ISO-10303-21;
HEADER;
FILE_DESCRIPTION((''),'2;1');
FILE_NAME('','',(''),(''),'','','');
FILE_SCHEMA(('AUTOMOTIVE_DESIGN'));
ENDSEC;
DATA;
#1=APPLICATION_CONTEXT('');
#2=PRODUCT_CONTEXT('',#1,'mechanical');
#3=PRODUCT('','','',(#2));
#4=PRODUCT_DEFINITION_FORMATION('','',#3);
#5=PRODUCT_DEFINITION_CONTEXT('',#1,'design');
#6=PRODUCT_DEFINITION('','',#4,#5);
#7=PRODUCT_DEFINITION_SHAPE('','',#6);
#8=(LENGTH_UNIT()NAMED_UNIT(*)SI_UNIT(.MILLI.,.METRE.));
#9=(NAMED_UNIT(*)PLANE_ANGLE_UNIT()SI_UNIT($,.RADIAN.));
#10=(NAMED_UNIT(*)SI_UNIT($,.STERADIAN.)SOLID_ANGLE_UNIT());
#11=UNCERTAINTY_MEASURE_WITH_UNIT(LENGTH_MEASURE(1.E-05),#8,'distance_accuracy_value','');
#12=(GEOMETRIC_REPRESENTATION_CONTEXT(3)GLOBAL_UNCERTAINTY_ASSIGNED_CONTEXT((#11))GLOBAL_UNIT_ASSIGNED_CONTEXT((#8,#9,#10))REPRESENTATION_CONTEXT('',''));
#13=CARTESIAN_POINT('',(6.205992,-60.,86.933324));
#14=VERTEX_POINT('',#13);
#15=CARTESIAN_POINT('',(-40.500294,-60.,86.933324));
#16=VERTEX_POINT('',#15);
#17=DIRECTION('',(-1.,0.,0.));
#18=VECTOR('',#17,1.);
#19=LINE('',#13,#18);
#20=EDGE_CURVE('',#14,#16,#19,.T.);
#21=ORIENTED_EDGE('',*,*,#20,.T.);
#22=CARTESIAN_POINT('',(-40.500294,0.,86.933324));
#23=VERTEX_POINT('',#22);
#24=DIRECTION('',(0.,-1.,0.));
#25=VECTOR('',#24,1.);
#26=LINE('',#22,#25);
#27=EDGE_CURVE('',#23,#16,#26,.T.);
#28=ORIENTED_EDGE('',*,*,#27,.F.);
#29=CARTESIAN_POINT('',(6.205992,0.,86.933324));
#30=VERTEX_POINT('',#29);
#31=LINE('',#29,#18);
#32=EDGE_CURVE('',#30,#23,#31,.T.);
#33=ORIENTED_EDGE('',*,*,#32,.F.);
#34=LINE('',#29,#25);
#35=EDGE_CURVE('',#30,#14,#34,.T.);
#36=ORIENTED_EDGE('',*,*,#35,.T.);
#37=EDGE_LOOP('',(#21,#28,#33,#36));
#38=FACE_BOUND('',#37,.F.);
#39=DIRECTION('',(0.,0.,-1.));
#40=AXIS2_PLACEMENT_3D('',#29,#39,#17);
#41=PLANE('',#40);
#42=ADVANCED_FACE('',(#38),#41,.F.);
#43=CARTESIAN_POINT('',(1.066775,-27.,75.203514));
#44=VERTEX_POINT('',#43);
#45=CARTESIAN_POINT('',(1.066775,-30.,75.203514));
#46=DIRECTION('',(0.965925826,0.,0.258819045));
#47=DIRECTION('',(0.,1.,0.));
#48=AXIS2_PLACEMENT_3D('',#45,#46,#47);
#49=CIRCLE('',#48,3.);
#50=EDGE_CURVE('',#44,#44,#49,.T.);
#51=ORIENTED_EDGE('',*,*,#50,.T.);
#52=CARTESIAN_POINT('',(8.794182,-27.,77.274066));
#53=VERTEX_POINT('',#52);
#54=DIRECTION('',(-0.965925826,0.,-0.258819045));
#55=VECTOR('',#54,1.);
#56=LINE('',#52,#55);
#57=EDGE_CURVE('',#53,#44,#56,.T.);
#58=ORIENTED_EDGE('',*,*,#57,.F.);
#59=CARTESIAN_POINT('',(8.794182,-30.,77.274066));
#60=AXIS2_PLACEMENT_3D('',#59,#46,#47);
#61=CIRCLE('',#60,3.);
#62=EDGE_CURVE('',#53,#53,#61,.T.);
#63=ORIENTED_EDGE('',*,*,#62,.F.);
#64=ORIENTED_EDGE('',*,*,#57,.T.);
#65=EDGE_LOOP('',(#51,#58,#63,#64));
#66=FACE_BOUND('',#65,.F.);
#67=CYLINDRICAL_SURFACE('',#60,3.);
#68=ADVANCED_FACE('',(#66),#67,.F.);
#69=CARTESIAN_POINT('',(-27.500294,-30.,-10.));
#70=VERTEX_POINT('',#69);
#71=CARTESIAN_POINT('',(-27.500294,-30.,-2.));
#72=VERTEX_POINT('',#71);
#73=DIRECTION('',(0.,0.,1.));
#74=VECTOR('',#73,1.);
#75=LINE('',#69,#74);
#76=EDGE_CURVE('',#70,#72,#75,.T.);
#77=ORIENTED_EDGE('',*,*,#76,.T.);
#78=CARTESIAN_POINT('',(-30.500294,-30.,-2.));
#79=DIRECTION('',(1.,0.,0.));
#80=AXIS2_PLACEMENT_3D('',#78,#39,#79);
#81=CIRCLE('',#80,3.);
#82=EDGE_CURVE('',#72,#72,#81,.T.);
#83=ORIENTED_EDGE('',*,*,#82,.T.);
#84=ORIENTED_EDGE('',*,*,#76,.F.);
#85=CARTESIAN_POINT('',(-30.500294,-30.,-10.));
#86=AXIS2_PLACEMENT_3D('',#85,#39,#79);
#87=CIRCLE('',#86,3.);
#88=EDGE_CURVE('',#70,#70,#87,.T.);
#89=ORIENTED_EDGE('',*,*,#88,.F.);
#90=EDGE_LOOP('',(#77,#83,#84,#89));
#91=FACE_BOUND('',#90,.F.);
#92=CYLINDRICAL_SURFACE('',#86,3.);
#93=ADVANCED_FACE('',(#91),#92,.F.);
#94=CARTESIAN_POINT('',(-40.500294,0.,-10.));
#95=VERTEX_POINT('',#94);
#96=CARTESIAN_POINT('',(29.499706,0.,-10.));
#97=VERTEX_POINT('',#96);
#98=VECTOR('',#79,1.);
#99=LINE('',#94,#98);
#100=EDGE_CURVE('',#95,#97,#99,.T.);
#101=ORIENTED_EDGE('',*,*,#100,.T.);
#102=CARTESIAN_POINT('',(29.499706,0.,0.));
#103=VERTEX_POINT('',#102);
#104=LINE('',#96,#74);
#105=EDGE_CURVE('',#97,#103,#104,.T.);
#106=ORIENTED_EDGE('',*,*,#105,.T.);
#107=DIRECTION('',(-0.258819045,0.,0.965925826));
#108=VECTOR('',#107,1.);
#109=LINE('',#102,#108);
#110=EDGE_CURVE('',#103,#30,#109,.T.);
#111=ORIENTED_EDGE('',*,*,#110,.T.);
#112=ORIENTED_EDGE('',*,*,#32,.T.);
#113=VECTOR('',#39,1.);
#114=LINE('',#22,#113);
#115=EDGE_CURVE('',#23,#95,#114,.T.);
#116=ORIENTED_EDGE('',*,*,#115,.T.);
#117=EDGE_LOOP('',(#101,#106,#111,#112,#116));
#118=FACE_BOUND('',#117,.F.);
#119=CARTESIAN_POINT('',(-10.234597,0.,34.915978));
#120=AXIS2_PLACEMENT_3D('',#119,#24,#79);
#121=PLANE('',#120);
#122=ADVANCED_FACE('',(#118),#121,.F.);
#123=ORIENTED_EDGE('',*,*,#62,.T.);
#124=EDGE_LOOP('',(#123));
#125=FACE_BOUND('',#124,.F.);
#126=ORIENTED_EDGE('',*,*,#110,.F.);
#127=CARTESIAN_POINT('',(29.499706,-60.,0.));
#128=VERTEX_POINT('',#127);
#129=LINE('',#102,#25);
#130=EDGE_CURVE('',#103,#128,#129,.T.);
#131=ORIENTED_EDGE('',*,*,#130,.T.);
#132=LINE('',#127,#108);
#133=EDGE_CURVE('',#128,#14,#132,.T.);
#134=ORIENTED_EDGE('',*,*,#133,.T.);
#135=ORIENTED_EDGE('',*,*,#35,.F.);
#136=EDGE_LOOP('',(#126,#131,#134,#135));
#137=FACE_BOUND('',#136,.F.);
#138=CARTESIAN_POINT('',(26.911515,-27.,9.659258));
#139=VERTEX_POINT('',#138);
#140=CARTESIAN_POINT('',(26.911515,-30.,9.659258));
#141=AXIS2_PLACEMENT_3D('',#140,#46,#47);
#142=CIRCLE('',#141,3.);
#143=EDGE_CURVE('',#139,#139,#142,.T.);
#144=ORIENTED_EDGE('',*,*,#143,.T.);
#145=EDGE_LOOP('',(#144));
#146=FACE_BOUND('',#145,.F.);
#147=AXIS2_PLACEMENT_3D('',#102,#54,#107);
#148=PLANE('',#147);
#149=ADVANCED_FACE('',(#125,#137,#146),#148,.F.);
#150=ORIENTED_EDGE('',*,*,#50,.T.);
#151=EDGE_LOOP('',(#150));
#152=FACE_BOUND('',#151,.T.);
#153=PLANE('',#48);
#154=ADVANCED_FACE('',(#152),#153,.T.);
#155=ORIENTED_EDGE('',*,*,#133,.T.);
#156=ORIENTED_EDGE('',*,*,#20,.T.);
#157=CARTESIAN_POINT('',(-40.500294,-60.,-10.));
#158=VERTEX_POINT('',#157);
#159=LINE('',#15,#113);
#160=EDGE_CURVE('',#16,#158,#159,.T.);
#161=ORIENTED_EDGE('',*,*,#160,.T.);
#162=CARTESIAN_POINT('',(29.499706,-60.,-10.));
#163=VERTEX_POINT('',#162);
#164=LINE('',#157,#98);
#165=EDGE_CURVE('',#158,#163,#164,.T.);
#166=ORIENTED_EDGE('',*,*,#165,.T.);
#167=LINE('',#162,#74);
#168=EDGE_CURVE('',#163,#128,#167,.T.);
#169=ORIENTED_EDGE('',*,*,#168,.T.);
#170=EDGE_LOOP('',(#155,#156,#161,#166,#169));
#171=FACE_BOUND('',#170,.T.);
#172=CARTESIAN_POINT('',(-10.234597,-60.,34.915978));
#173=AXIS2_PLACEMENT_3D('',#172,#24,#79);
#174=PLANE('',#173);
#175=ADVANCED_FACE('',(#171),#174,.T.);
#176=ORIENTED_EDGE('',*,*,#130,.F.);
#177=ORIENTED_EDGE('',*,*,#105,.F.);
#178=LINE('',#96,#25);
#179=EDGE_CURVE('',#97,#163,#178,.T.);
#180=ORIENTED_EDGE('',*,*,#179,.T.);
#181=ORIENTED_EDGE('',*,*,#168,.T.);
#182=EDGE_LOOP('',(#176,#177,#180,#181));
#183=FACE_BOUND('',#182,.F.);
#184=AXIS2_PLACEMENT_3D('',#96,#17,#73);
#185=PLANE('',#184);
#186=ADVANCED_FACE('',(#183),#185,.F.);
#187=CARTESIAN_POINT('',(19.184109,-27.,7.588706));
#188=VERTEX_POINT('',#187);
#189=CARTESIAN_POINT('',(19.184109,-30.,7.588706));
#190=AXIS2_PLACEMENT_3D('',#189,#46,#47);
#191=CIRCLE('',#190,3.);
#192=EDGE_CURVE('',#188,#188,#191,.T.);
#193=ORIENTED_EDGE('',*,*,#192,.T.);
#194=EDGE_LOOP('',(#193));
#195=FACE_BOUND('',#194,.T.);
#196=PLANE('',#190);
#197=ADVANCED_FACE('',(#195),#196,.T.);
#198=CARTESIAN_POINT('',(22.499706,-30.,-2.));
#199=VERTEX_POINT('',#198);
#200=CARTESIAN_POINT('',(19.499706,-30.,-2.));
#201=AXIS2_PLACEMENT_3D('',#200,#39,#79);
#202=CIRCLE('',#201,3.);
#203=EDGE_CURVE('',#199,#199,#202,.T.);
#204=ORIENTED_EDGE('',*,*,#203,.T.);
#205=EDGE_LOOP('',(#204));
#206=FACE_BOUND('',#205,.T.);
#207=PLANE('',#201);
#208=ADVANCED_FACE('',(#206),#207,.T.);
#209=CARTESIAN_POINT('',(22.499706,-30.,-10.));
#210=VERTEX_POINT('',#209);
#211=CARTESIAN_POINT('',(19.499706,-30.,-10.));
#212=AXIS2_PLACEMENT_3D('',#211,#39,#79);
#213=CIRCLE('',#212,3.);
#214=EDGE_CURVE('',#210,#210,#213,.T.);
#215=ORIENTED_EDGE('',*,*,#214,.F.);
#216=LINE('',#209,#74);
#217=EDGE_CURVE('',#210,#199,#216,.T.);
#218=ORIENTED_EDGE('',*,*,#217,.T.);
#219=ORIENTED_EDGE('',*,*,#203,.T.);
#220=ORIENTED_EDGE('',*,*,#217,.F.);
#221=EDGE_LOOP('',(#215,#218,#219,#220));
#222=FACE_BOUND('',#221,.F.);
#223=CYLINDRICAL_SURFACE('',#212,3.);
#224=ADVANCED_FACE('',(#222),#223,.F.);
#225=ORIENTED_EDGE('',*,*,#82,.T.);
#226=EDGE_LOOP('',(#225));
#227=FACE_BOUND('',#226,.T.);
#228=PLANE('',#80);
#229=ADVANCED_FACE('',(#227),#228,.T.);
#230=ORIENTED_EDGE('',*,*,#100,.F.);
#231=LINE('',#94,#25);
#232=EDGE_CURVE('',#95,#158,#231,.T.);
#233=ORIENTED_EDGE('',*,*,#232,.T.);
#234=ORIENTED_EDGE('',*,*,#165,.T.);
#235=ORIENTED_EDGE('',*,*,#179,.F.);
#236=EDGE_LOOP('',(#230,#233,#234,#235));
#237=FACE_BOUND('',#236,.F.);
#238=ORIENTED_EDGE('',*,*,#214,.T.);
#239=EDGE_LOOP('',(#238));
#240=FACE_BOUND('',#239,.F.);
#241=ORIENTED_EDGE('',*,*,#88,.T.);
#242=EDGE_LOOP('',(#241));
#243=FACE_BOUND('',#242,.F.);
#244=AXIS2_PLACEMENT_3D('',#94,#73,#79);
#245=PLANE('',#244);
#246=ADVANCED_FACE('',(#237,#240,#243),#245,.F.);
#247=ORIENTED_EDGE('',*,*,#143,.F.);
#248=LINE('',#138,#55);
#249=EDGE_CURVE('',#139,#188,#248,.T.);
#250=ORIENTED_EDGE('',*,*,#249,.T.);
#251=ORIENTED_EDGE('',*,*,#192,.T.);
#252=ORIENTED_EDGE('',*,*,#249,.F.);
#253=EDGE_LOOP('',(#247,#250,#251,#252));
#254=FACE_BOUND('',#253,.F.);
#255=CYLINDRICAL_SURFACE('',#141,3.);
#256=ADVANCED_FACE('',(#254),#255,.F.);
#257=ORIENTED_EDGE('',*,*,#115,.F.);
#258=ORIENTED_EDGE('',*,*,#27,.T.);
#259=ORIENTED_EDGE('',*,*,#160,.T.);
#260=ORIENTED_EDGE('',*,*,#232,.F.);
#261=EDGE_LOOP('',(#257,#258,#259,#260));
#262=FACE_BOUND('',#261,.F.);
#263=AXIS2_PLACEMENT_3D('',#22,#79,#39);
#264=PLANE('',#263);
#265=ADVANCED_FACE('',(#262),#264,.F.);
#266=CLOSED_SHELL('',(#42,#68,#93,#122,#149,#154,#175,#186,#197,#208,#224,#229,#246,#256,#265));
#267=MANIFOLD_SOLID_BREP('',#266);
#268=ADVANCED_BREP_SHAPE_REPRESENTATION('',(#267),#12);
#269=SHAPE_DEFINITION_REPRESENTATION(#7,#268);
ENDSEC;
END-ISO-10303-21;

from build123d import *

# Parameters (mm, degrees)
F1_DEPTH = 60
F2_R     = 3
F3_DEPTH = 8
F4_R     = 3
F5_DEPTH = 8


# Not quite as in the source:
# - a feature names something its author has since deleted; it is built from what else it names


with BuildPart() as f1:
    # F0 (on Front) → F1 (new body)
    with BuildSketch(Plane.XZ):
        Polygon((29.4997055829, 0), (6.2059915236, 86.933324366), (-40.5002944171, 86.933324366), (-40.5002944171, -10), (29.4997055829, -10), align=None)
    extrude(amount=F1_DEPTH)

    # F2 (on face) → F3 (cut)
    with BuildSketch(Plane(origin=(0, 0, -10), x_dir=(1, 0, 0), z_dir=(0, 0, -1))):
        with Locations((-30.5002944171, 30)):
            Circle(F2_R)
        with Locations((19.4997055829, 30)):
            Circle(F2_R)
    extrude(amount=-F3_DEPTH, mode=Mode.SUBTRACT)

    # F4 (on face) → F5 (cut)
    with BuildSketch(Plane(origin=(27.5236000109, 0, 7.3749263957), x_dir=(0, 1, 0), z_dir=(0.9659258263, 0, 0.2588190451))):
        with Locations((-30, 72.3649143702)):
            Circle(F4_R)
        with Locations((-30, 2.3649143702)):
            Circle(F4_R)
    extrude(amount=-F5_DEPTH, mode=Mode.SUBTRACT)


solid = f1.part
